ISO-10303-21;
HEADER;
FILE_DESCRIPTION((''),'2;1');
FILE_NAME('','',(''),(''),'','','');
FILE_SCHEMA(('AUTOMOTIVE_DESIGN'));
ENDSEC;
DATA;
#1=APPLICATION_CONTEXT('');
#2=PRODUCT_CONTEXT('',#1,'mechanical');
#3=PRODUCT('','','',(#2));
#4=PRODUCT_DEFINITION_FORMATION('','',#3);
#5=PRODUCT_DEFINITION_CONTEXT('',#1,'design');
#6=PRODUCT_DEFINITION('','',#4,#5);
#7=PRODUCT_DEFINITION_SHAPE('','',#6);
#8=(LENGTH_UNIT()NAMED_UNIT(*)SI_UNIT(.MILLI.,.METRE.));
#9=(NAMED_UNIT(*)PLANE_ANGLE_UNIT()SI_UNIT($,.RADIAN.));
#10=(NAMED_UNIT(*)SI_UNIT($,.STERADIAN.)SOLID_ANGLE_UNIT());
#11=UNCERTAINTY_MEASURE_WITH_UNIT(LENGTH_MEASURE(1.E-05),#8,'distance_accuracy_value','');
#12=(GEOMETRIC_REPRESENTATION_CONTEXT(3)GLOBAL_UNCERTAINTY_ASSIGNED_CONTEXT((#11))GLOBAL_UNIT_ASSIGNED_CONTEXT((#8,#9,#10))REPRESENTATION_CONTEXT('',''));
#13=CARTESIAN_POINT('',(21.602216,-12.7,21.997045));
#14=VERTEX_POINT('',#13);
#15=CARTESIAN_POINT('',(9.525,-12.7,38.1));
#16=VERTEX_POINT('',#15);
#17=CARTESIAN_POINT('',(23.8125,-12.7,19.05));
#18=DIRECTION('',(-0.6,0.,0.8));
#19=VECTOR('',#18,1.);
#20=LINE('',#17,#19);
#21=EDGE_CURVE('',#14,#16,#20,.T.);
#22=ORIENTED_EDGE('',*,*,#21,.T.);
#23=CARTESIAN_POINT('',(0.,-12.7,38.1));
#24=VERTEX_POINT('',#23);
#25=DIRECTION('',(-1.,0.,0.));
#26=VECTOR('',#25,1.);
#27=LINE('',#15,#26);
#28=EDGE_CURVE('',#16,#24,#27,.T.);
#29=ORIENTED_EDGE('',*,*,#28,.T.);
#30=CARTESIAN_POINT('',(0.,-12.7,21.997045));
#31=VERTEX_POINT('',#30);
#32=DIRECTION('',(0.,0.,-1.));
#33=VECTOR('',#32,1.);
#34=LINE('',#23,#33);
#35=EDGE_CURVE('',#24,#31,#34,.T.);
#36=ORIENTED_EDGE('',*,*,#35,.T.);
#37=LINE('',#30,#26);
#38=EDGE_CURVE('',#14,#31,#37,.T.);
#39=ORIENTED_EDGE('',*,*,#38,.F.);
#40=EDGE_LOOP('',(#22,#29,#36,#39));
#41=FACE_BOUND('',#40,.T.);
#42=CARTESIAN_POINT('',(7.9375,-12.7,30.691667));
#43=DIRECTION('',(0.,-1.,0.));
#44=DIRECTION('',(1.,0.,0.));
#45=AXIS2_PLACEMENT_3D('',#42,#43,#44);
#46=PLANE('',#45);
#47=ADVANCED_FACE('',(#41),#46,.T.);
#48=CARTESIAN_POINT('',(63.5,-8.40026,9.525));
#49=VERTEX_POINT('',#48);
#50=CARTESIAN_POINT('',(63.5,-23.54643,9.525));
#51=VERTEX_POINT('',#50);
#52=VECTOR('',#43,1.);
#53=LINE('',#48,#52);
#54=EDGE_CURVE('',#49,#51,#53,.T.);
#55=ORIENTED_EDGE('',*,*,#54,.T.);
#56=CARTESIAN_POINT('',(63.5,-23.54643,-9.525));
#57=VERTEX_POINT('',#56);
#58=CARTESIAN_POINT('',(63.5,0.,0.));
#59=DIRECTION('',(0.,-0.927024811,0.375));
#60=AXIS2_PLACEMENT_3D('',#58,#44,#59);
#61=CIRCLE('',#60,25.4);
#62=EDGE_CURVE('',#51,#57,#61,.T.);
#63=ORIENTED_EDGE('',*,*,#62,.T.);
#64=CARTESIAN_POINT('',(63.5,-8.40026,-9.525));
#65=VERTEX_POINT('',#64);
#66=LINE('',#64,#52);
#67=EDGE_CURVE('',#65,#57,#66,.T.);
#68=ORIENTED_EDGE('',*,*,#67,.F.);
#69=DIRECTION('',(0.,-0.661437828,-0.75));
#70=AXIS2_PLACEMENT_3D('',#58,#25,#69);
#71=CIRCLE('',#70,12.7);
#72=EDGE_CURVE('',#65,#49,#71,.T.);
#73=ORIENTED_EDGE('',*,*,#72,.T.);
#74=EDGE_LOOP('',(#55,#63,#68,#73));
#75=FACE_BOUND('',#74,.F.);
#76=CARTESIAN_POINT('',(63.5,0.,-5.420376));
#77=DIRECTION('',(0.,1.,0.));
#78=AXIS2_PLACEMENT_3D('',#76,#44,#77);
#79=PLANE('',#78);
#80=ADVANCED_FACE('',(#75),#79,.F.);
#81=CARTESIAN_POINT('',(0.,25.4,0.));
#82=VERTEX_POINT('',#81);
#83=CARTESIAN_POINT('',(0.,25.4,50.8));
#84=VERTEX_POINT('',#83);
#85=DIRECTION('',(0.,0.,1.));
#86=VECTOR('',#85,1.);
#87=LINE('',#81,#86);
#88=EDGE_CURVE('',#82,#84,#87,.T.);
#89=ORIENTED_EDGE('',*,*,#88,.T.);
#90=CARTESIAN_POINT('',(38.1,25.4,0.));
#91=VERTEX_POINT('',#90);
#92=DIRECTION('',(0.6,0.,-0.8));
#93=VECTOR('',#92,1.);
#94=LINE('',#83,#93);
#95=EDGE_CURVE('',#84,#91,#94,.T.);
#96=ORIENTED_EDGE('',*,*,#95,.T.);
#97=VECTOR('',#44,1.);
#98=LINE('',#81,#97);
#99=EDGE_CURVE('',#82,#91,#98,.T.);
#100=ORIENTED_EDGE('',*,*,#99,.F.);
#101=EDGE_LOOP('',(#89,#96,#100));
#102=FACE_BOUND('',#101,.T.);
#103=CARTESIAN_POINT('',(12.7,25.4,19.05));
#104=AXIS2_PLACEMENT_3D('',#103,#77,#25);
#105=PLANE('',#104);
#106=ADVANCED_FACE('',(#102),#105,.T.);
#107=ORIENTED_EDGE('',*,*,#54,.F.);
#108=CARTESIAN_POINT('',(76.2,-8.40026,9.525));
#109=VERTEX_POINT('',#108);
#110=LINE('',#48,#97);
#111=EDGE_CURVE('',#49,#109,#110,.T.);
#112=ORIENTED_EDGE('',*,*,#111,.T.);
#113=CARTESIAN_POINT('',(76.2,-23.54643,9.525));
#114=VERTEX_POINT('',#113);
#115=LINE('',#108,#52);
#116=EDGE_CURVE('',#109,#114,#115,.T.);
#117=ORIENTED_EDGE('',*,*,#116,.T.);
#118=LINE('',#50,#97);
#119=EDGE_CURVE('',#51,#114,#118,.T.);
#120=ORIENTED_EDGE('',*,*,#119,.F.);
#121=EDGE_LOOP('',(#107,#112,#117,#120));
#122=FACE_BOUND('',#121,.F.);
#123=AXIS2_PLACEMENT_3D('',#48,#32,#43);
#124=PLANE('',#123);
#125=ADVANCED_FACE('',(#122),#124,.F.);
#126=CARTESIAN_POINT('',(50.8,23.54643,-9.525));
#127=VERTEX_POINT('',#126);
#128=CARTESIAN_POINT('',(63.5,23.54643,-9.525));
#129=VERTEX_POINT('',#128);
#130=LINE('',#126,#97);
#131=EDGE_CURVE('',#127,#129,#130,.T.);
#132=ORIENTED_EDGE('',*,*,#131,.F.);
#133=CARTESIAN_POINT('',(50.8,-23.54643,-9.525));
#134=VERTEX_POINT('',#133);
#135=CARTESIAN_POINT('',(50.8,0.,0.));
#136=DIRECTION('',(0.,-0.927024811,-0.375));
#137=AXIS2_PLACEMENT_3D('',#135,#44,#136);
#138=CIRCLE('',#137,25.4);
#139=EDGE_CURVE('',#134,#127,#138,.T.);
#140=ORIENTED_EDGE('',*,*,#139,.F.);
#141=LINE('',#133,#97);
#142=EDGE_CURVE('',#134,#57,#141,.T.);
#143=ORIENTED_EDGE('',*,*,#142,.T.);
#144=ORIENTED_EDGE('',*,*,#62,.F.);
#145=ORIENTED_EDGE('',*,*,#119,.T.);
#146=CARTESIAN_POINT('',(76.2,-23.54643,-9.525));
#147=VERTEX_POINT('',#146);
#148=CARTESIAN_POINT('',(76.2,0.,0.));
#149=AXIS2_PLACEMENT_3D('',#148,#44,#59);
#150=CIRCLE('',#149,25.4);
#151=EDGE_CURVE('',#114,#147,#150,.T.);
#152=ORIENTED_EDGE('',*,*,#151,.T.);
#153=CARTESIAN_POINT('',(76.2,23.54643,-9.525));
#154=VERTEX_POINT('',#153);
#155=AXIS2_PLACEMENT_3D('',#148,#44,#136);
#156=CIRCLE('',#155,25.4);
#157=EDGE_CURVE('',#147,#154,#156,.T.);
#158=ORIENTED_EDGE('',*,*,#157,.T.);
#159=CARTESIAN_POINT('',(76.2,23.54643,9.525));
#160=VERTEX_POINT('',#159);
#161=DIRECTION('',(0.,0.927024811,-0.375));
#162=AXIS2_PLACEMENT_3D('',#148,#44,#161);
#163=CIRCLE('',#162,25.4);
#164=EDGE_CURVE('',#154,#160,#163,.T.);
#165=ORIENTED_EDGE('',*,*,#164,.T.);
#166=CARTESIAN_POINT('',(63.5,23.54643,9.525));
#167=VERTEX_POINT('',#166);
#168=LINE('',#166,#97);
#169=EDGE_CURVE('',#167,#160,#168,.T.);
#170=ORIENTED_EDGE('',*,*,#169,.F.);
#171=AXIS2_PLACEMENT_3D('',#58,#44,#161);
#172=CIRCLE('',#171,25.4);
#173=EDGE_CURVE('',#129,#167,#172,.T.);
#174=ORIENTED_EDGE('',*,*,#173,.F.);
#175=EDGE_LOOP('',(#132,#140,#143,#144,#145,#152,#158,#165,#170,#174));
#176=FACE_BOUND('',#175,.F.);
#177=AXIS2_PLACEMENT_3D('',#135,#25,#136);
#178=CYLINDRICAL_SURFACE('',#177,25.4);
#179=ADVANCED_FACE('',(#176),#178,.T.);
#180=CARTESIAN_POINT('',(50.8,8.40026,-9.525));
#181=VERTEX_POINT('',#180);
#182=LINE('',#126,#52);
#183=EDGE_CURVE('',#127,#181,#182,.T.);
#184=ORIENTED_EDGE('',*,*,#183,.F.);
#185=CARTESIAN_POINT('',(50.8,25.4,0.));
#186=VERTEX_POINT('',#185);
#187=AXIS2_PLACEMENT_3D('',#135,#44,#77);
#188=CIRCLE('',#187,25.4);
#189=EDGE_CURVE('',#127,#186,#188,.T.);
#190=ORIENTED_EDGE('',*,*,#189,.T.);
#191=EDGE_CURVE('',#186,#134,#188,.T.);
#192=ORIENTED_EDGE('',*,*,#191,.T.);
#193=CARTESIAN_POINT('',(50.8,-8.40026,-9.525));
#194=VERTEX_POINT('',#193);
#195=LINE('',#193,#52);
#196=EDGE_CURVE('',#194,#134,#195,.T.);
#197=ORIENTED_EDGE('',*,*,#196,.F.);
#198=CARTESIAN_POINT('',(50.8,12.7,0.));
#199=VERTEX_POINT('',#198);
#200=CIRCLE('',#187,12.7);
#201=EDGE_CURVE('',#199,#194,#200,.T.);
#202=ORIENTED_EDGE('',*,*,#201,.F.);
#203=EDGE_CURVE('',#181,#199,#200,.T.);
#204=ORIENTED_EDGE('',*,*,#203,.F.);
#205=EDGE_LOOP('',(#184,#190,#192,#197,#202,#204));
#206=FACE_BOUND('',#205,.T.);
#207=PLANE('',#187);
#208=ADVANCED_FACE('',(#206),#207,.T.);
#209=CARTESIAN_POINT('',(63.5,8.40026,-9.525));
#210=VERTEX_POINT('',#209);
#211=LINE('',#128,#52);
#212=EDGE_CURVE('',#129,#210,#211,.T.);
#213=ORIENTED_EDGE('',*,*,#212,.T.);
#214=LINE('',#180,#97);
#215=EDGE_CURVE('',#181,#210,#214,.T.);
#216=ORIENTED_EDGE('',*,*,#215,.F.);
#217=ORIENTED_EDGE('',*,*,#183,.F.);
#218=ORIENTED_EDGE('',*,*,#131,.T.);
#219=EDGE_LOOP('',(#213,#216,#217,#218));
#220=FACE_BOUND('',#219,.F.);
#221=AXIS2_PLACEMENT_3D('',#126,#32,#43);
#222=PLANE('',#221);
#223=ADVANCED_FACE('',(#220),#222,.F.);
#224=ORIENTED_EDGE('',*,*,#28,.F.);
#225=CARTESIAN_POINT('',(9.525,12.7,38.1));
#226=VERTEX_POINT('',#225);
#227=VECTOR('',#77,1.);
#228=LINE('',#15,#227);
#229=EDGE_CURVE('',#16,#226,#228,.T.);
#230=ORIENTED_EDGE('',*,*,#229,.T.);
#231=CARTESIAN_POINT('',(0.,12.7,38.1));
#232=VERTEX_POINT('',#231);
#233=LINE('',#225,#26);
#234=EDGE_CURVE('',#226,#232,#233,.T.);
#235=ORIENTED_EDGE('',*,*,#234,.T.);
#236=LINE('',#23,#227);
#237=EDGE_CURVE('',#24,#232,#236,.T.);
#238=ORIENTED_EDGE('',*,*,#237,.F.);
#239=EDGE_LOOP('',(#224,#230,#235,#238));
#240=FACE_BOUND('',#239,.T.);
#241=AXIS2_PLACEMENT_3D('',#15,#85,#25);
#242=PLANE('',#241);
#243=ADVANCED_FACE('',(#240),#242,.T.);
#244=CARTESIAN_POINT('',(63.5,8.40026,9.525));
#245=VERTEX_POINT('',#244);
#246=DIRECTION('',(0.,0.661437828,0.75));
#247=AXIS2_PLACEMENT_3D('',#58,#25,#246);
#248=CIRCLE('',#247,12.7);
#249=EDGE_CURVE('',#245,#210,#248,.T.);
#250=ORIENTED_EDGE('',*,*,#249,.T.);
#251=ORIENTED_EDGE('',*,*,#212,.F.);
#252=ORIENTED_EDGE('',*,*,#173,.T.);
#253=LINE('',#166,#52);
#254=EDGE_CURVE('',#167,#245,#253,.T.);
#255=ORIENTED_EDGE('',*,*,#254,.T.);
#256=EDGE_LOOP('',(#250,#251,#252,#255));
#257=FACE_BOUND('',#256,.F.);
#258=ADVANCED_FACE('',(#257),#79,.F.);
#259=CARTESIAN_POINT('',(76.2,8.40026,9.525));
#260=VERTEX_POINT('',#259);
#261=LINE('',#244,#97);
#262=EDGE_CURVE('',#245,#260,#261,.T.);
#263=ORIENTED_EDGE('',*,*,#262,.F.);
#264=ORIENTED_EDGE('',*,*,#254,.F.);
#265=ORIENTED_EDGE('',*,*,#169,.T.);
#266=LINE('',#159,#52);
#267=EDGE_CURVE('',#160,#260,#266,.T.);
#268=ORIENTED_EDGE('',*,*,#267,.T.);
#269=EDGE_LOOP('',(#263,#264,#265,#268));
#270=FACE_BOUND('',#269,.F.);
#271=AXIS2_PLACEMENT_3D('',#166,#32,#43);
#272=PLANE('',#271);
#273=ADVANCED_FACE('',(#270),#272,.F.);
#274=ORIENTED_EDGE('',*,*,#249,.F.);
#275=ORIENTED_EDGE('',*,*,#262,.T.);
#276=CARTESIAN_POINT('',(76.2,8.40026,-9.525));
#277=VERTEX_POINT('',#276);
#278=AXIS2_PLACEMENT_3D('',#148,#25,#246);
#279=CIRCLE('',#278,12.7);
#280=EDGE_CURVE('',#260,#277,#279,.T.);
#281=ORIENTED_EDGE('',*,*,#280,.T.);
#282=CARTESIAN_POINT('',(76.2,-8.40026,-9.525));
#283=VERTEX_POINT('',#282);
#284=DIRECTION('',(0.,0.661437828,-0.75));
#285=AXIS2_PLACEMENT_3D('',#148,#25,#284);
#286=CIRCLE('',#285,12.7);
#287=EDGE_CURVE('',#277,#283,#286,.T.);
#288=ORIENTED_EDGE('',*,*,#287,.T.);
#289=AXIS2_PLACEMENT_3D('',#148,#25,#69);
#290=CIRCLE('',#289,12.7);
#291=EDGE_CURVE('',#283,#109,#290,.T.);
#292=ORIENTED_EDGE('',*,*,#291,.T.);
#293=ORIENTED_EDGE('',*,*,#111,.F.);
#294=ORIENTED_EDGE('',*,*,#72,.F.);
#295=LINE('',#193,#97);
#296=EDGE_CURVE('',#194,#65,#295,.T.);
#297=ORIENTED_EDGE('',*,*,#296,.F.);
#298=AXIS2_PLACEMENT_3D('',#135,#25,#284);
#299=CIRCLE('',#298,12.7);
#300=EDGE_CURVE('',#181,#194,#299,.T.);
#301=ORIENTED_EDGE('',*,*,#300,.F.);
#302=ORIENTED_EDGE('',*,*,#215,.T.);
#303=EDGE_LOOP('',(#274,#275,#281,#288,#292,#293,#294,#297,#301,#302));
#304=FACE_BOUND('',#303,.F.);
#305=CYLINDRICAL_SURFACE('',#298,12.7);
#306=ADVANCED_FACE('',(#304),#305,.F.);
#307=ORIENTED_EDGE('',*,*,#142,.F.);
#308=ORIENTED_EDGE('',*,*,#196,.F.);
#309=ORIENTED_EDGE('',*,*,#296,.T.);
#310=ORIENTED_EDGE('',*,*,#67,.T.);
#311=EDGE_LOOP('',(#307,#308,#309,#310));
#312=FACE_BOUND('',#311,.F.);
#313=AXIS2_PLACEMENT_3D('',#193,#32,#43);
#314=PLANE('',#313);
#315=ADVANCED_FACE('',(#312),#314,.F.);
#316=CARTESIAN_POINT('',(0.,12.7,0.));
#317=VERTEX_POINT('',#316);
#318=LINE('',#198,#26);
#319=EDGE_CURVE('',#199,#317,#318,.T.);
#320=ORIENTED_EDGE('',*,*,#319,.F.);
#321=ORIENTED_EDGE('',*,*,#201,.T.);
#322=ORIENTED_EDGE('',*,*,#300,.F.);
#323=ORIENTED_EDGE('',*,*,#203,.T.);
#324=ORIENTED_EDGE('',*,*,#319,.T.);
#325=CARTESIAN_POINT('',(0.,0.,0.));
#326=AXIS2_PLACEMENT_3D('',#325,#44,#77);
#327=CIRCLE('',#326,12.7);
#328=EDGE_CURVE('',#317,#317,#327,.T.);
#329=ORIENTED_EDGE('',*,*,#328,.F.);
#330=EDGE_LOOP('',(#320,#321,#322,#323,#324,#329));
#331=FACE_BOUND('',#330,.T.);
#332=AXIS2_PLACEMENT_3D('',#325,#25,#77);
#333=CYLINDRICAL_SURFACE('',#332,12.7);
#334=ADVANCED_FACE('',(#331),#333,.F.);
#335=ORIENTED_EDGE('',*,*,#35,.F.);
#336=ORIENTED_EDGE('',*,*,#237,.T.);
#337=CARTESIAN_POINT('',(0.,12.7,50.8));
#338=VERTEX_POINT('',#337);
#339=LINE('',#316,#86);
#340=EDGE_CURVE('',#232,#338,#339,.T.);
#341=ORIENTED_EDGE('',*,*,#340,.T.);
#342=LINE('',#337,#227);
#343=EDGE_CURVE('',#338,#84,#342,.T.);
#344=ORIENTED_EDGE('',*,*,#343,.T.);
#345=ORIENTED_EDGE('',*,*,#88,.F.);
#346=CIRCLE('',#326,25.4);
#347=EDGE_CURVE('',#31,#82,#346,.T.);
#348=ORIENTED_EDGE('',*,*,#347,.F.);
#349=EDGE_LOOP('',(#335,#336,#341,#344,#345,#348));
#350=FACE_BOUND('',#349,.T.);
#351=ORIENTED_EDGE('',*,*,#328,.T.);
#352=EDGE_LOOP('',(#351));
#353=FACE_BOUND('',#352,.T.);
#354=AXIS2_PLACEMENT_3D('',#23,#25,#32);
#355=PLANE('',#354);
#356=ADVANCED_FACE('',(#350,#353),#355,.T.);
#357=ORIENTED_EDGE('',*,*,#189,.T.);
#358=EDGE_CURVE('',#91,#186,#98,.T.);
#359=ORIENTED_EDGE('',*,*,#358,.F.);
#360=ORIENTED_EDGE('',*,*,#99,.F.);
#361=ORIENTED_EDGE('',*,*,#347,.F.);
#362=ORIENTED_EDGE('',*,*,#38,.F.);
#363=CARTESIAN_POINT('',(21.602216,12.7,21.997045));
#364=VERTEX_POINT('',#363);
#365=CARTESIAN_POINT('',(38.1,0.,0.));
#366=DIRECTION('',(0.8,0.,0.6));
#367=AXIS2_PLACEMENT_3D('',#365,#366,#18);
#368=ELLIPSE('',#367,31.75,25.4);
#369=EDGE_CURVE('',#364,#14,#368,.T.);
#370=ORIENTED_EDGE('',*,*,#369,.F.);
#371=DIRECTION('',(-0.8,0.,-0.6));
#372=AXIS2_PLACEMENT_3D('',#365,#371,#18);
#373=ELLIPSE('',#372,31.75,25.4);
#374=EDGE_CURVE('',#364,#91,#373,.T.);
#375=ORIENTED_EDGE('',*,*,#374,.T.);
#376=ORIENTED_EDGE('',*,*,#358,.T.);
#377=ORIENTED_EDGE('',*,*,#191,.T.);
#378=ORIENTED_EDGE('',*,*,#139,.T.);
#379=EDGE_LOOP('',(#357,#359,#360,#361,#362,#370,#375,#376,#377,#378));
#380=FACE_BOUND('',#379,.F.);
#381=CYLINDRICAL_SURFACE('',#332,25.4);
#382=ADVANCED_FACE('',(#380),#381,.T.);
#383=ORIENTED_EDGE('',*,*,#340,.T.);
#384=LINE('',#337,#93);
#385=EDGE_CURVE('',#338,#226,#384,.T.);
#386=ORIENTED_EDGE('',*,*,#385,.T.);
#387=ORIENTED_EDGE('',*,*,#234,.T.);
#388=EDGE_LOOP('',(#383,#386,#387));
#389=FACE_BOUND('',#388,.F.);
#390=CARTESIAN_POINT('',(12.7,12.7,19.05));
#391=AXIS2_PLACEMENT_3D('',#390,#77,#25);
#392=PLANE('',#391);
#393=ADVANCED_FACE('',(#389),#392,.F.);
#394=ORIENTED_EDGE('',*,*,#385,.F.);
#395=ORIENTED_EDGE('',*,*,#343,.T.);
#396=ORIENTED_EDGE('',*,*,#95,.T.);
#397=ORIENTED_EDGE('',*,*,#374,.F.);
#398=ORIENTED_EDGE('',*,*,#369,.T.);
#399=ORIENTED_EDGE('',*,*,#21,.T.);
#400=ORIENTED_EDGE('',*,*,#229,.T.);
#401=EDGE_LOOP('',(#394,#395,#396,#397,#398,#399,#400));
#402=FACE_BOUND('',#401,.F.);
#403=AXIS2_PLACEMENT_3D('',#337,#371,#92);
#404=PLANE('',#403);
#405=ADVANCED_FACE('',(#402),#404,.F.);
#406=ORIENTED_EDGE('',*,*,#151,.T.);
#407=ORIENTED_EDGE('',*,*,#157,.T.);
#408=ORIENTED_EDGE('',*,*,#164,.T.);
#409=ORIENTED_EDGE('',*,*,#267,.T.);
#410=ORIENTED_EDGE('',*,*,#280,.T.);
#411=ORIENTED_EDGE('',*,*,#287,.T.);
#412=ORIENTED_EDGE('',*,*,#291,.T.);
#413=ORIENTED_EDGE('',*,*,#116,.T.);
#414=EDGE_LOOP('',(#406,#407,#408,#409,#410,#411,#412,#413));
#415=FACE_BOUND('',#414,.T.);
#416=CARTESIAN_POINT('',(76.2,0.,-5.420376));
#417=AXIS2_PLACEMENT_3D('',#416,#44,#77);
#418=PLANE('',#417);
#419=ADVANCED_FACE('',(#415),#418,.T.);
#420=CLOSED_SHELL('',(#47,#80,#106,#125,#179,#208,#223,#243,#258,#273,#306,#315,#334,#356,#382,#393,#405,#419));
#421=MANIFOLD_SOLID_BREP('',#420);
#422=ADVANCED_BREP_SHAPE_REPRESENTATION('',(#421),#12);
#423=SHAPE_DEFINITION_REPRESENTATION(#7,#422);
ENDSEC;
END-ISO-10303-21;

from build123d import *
from build123d import SkipClean  # not in build123d's __all__

# Parameters (mm, degrees)
F0_R      = 25.4
F0_R_2    = 12.7
F1_DEPTH  = 50.8
F3_DEPTH  = 12.7
F5_DEPTH  = 12.7
F8_DEPTH  = 25.4
F10_DEPTH = 12.7


# Not quite as in the source:
# - after a boolean that leaves OpenCascade's solid faulty, fix() repairs it


with BuildPart() as f1:
    # F0 (on Right) → F1 (new body)
    with BuildSketch(Plane.YZ):
        Circle(F0_R)
        Circle(F0_R_2, mode=Mode.SUBTRACT)
    extrude(amount=F1_DEPTH)

    # F2 (on face) → F3 (join)
    with BuildSketch(Plane.YZ.offset(50.8)):
        with BuildLine():
            Line((-8.4002604126, -9.525), (-23.5464301965, -9.525))
            ThreePointArc((-23.5464301965, -9.525), (0, -25.4), (23.5464301965, -9.525))
            Line((23.5464301965, -9.525), (8.4002604126, -9.525))
            ThreePointArc((8.4002604126, -9.525), (0, -12.7), (-8.4002604126, -9.525))
        make_face()
    extrude(amount=F3_DEPTH)

    # F4 (on face) → F5 (join)
    with BuildSketch(Plane.YZ.offset(63.5)):
        with BuildLine():
            ThreePointArc((-23.5464301965, -9.525), (0, -25.4), (23.5464301965, -9.525))
            ThreePointArc((23.5464301965, -9.525), (25.4, 0), (23.5464301965, 9.525))
            Line((23.5464301965, 9.525), (8.4002604126, 9.525))
            ThreePointArc((8.4002604126, 9.525), (12.7, 0), (8.4002604126, -9.525))
            ThreePointArc((8.4002604126, -9.525), (0, -12.7), (-8.4002604126, -9.525))
            ThreePointArc((-8.4002604126, -9.525), (-12.7, 0), (-8.4002604126, 9.525))
            Line((-8.4002604126, 9.525), (-23.5464301965, 9.525))
            ThreePointArc((-23.5464301965, 9.525), (-25.4, 0), (-23.5464301965, -9.525))
        make_face()
    with SkipClean():  # cleaning this boolean's faces spoils the solid; the shape is the same uncleaned
        extrude(amount=F5_DEPTH)

    # F7 (on offset) → F8 (join)
    with BuildSketch(Plane.XZ.offset(12.7)):
        Polygon((0, 38.1), (0, 25.4), (19.05, 25.4), (9.525, 38.1), align=None)
        Polygon((0, 25.4), (0, 19.05), (23.8125, 19.05), (19.05, 25.4), align=None)
    extrude(amount=-F8_DEPTH)

    add(f1.part.fix(), mode=Mode.REPLACE)

    # F9 (on face) → F10 (join)
    with BuildSketch(Plane(origin=(0, 12.7, 0), x_dir=(-1, 0, 0), z_dir=(0, 1, 0))):
        Polygon((-38.1, 0), (0, 0), (0, 50.8), (-19.05, 25.4), align=None)
    extrude(amount=F10_DEPTH)


solid = f1.part
